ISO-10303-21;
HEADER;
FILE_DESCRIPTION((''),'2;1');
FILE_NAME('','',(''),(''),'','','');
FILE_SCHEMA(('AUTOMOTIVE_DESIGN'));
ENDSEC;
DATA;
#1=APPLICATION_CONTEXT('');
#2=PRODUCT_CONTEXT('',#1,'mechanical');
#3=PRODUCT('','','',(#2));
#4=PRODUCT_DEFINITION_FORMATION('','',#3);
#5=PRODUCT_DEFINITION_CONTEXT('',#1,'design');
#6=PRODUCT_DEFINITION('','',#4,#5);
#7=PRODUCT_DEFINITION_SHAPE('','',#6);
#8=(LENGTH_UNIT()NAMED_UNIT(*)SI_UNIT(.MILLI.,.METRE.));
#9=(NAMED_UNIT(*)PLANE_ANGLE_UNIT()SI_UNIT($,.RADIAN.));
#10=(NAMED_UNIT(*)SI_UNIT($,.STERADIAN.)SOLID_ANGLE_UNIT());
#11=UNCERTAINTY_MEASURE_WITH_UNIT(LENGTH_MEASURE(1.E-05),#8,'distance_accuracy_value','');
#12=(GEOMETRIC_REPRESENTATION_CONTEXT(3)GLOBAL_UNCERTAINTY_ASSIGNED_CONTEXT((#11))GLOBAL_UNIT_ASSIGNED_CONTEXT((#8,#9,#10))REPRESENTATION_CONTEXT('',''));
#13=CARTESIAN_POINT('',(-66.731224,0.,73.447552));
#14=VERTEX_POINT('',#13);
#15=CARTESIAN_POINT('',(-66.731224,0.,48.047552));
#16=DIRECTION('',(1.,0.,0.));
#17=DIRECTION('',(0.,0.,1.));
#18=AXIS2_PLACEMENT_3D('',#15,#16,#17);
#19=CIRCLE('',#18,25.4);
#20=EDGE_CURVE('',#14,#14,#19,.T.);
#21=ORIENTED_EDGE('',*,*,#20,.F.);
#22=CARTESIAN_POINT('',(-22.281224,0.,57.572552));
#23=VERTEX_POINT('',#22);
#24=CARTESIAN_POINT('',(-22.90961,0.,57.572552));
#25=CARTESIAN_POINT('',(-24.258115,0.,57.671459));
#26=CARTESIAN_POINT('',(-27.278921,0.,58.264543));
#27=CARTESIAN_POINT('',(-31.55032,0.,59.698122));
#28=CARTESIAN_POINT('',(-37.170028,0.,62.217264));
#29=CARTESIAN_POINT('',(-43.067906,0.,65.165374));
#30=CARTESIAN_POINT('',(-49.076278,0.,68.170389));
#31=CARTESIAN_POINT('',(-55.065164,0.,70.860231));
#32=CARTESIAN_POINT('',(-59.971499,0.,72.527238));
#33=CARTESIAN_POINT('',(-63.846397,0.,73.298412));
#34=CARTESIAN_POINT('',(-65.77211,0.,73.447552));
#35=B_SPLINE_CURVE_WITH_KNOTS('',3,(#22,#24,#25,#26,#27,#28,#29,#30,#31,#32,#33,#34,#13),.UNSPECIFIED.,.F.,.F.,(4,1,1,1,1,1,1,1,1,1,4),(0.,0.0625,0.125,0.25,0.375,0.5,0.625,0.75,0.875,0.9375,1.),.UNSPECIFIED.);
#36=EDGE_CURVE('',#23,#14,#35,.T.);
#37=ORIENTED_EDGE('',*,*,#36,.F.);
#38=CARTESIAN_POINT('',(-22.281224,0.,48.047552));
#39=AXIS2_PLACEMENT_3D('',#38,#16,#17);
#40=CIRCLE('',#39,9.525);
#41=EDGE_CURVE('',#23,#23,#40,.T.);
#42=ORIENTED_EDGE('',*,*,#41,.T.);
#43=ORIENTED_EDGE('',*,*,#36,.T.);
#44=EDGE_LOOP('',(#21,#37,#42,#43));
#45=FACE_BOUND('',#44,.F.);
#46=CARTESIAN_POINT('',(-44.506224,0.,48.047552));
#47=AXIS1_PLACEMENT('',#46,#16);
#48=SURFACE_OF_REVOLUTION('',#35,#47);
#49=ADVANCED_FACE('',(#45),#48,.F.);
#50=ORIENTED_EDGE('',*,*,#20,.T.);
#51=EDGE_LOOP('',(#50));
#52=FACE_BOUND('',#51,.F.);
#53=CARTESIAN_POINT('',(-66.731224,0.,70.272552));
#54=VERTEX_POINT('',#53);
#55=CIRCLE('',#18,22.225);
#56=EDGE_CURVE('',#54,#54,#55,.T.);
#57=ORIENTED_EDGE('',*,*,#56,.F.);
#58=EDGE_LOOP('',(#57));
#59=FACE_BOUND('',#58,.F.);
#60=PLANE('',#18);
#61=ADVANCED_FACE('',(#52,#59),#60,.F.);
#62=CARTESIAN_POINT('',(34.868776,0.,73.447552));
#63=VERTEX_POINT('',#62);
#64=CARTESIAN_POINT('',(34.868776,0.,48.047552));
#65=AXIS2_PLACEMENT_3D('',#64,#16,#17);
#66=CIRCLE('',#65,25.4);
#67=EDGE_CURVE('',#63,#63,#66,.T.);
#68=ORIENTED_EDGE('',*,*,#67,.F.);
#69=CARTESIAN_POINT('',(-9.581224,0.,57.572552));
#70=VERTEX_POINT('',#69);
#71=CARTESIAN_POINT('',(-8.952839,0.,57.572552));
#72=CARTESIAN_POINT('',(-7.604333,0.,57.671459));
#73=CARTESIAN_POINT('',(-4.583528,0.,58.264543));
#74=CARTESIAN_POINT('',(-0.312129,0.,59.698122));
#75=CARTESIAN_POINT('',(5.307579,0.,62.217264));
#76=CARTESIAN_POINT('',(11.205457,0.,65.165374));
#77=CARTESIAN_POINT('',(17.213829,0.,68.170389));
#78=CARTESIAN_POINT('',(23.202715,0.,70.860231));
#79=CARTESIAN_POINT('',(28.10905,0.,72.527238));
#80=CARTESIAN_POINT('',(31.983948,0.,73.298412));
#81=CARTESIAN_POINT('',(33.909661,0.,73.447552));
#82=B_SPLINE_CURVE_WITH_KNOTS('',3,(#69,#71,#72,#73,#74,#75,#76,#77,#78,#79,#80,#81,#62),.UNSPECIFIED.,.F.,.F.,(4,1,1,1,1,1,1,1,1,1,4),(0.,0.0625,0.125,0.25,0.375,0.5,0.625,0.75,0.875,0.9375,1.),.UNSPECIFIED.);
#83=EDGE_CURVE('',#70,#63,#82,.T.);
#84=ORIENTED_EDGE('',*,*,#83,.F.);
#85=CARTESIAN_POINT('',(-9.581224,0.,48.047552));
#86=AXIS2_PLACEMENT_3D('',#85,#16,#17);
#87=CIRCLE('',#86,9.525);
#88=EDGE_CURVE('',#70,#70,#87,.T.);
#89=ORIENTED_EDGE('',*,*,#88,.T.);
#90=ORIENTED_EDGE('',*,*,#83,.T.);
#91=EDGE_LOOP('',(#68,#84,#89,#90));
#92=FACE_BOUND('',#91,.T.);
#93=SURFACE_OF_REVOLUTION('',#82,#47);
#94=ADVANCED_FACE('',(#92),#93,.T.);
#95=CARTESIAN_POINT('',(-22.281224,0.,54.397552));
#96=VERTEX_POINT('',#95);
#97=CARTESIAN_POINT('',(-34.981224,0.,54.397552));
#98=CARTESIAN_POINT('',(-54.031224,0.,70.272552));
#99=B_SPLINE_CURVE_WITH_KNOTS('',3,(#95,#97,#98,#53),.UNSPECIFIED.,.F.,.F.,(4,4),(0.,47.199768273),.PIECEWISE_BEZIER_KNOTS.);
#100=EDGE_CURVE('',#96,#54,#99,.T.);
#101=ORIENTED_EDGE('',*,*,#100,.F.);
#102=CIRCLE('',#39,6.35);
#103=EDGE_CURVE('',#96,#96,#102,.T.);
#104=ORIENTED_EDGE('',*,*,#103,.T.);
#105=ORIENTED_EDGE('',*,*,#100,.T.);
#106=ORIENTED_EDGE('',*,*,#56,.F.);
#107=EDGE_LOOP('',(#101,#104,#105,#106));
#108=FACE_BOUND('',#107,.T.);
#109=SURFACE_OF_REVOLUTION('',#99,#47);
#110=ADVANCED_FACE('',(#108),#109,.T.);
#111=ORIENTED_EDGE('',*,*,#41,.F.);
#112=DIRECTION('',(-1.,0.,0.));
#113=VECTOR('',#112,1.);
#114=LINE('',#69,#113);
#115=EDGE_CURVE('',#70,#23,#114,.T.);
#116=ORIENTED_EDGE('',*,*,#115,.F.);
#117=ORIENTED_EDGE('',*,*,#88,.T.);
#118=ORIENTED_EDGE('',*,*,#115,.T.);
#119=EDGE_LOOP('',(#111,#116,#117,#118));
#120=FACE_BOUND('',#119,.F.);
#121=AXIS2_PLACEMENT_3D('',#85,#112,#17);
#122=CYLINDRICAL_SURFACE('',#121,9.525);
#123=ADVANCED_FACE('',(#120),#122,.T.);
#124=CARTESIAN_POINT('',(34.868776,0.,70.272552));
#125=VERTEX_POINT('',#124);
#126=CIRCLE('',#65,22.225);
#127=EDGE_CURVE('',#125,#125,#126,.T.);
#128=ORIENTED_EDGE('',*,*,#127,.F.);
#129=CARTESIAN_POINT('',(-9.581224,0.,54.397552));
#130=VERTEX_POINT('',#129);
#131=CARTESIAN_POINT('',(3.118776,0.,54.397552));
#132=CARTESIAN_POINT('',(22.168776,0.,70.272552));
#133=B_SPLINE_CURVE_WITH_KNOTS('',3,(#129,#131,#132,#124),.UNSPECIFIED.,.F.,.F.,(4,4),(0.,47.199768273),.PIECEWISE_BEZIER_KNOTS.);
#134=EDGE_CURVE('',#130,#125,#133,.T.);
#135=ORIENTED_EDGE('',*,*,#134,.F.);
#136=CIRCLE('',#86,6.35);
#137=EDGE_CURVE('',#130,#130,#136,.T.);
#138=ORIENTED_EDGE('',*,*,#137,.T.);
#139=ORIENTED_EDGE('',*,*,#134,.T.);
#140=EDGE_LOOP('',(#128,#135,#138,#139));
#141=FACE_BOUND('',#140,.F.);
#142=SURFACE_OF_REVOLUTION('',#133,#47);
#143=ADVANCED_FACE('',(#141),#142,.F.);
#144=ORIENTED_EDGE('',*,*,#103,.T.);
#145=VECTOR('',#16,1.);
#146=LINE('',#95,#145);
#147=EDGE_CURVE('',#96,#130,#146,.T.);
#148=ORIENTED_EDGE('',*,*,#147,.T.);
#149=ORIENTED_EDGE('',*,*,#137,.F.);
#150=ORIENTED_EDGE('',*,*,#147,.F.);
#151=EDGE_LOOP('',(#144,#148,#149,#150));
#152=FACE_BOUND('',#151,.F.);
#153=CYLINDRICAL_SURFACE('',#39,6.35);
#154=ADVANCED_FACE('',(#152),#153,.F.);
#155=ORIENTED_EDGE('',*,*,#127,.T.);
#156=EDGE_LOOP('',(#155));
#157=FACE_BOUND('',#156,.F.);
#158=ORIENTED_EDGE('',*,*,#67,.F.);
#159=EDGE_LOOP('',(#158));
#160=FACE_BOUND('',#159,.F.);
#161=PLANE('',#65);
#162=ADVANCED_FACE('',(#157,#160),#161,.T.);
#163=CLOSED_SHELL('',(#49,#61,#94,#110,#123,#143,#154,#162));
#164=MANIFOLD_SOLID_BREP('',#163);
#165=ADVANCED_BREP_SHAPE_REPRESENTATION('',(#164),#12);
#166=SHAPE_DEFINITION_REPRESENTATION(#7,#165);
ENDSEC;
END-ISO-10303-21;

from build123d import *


# Not quite as in the source:
# - the dataset's text gives a spline's control points without its knots; the knots are read off the source's solid


with BuildPart() as f1:
    # F0 (on Front) → F1 (revolve)
    with BuildSketch(Plane.XZ):
        with BuildLine():
            Line((-66.7312243659, 73.4475515783), (-66.7312243659, 70.2725515783))
            add(Edge.make_bspline(
                [(-22.2812243659, 54.3975515783), (-34.9812243659, 54.3975515783), (-54.0312243659, 70.2725515783), (-66.7312243659, 70.2725515783)],
                knots=[0, 0, 0, 0, 47.1997682727, 47.1997682727, 47.1997682727, 47.1997682727], degree=3))
            Line((-22.2812243659, 54.3975515783), (-15.9312243659, 54.3975515783))
            Line((-15.9312243659, 54.3975515783), (-9.5812243659, 54.3975515783))
            add(Edge.make_bspline(
                [(-9.5812243659, 54.3975515783), (3.1187756341, 54.3975515783), (22.1687756341, 70.2725515783), (34.8687756341, 70.2725515783)],
                knots=[0, 0, 0, 0, 47.1997682727, 47.1997682727, 47.1997682727, 47.1997682727], degree=3))
            Line((34.8687756341, 70.2725515783), (34.8687756341, 73.4475515783))
            add(Edge.make_bspline(
                [(-9.5812243659, 57.5725515783), (-8.9528389492, 57.5725515783), (-7.604333407, 57.6714587753), (-4.5835276431, 58.2645427279), (-0.3121287775, 59.6981220412), (5.3075788443, 62.217263906), (11.2054567804, 65.1653736616), (17.2138288443, 68.170388906), (23.2027149725, 70.8602314162), (28.1090504819, 72.5272380404), (31.983947843, 73.2984119003), (33.9096610508, 73.4475515783), (34.8687756341, 73.4475515783)],
                knots=[0, 0, 0, 0, 0.0625, 0.125, 0.25, 0.375, 0.5, 0.625, 0.75, 0.875, 0.9375, 1, 1, 1, 1], degree=3))
            Line((-9.5812243659, 57.5725515783), (-15.9312243659, 57.5725515783))
            Line((-15.9312243659, 57.5725515783), (-22.2812243659, 57.5725515783))
            add(Edge.make_bspline(
                [(-22.2812243659, 57.5725515783), (-22.9096097826, 57.5725515783), (-24.2581153248, 57.6714587753), (-27.2789210887, 58.2645427279), (-31.5503199543, 59.6981220412), (-37.1700275761, 62.217263906), (-43.0679055123, 65.1653736616), (-49.0762775761, 68.170388906), (-55.0651637043, 70.8602314162), (-59.9714992137, 72.5272380404), (-63.8463965748, 73.2984119003), (-65.7721097826, 73.4475515783), (-66.7312243659, 73.4475515783)],
                knots=[0, 0, 0, 0, 0.0625, 0.125, 0.25, 0.375, 0.5, 0.625, 0.75, 0.875, 0.9375, 1, 1, 1, 1], degree=3))
        make_face()
    revolve(axis=Axis((-44.5062243659, 0, 48.0475515783), (1, 0, 0)))


solid = f1.part
